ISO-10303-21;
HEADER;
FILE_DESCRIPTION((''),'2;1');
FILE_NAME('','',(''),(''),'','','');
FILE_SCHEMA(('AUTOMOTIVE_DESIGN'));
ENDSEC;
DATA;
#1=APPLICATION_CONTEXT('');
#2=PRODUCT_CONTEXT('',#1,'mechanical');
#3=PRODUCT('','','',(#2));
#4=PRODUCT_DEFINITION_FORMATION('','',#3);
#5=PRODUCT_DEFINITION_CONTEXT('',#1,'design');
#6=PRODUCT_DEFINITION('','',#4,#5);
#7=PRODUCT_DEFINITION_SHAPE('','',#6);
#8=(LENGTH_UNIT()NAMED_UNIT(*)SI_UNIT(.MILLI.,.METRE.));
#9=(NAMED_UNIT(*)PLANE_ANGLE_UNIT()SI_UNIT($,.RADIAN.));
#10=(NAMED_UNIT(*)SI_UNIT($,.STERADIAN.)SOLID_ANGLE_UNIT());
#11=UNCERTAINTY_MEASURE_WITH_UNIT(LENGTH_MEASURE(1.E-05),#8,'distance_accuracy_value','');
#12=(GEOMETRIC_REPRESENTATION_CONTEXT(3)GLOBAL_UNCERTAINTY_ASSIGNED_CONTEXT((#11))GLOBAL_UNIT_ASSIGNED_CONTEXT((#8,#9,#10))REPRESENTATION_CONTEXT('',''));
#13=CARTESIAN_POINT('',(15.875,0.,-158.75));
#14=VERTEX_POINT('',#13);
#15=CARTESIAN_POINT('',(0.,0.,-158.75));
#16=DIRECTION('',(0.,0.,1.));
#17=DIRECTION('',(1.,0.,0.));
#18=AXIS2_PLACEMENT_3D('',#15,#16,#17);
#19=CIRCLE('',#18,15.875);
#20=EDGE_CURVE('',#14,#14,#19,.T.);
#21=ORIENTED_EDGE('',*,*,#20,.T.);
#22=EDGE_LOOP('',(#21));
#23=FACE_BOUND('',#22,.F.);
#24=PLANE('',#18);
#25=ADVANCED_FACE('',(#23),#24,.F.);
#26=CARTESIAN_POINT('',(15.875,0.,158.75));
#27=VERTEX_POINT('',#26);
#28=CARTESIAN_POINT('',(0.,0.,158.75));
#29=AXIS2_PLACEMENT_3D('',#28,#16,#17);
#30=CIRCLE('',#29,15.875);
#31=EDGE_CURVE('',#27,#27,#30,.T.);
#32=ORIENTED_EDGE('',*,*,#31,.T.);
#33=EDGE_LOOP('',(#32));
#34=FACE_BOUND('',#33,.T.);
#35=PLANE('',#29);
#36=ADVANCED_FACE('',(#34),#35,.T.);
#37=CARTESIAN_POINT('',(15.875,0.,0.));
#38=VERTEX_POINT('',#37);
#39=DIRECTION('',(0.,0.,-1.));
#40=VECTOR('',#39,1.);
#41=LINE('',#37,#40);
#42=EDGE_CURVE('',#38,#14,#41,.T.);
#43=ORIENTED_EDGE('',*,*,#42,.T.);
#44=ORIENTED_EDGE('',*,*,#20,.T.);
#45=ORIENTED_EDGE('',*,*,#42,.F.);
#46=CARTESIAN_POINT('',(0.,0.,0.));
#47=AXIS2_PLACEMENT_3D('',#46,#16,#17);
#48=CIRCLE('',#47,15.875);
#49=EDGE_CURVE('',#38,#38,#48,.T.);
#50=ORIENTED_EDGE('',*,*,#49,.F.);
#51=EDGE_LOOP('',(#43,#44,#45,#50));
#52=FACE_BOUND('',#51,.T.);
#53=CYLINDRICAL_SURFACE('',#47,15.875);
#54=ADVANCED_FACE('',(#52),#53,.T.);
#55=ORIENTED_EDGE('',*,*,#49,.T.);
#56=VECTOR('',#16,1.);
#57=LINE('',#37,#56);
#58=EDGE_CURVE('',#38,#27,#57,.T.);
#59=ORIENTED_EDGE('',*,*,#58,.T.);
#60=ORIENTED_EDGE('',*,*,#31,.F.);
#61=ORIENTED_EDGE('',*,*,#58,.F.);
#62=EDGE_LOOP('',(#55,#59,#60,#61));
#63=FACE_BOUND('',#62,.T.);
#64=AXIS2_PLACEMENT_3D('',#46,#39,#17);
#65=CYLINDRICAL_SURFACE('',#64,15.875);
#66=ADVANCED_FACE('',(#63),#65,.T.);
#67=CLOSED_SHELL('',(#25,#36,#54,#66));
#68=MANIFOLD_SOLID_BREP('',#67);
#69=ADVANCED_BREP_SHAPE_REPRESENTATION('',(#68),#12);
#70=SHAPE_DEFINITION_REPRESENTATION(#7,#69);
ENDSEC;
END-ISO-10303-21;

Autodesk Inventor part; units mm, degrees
ref_plane "YZ Plane" through (0, 0, 0) normal (1, 0, 0) x (0, 1, 0)
ref_plane "XZ Plane" through (0, 0, 0) normal (0, 1, 0) x (-1, 0, 0)
ref_plane "XY Plane" through (0, 0, 0) normal (0, 0, 1) x (1, 0, 0)
sketch "Sketch1" plane through (0, 0, 0) normal (0, 0, 1) x (1, 0, 0)
  circle A0 centre (0, 0) radius 1.5875
  dimension "d0" = 3.175
extrude "Extrusion1" add sketch "Sketch1" along normal mid plane 31.75
scale "Scale1" factors (10, 10, 10) then translate (0, 0, 0) bodies 1
properties part number "SA Shock Shaft"
